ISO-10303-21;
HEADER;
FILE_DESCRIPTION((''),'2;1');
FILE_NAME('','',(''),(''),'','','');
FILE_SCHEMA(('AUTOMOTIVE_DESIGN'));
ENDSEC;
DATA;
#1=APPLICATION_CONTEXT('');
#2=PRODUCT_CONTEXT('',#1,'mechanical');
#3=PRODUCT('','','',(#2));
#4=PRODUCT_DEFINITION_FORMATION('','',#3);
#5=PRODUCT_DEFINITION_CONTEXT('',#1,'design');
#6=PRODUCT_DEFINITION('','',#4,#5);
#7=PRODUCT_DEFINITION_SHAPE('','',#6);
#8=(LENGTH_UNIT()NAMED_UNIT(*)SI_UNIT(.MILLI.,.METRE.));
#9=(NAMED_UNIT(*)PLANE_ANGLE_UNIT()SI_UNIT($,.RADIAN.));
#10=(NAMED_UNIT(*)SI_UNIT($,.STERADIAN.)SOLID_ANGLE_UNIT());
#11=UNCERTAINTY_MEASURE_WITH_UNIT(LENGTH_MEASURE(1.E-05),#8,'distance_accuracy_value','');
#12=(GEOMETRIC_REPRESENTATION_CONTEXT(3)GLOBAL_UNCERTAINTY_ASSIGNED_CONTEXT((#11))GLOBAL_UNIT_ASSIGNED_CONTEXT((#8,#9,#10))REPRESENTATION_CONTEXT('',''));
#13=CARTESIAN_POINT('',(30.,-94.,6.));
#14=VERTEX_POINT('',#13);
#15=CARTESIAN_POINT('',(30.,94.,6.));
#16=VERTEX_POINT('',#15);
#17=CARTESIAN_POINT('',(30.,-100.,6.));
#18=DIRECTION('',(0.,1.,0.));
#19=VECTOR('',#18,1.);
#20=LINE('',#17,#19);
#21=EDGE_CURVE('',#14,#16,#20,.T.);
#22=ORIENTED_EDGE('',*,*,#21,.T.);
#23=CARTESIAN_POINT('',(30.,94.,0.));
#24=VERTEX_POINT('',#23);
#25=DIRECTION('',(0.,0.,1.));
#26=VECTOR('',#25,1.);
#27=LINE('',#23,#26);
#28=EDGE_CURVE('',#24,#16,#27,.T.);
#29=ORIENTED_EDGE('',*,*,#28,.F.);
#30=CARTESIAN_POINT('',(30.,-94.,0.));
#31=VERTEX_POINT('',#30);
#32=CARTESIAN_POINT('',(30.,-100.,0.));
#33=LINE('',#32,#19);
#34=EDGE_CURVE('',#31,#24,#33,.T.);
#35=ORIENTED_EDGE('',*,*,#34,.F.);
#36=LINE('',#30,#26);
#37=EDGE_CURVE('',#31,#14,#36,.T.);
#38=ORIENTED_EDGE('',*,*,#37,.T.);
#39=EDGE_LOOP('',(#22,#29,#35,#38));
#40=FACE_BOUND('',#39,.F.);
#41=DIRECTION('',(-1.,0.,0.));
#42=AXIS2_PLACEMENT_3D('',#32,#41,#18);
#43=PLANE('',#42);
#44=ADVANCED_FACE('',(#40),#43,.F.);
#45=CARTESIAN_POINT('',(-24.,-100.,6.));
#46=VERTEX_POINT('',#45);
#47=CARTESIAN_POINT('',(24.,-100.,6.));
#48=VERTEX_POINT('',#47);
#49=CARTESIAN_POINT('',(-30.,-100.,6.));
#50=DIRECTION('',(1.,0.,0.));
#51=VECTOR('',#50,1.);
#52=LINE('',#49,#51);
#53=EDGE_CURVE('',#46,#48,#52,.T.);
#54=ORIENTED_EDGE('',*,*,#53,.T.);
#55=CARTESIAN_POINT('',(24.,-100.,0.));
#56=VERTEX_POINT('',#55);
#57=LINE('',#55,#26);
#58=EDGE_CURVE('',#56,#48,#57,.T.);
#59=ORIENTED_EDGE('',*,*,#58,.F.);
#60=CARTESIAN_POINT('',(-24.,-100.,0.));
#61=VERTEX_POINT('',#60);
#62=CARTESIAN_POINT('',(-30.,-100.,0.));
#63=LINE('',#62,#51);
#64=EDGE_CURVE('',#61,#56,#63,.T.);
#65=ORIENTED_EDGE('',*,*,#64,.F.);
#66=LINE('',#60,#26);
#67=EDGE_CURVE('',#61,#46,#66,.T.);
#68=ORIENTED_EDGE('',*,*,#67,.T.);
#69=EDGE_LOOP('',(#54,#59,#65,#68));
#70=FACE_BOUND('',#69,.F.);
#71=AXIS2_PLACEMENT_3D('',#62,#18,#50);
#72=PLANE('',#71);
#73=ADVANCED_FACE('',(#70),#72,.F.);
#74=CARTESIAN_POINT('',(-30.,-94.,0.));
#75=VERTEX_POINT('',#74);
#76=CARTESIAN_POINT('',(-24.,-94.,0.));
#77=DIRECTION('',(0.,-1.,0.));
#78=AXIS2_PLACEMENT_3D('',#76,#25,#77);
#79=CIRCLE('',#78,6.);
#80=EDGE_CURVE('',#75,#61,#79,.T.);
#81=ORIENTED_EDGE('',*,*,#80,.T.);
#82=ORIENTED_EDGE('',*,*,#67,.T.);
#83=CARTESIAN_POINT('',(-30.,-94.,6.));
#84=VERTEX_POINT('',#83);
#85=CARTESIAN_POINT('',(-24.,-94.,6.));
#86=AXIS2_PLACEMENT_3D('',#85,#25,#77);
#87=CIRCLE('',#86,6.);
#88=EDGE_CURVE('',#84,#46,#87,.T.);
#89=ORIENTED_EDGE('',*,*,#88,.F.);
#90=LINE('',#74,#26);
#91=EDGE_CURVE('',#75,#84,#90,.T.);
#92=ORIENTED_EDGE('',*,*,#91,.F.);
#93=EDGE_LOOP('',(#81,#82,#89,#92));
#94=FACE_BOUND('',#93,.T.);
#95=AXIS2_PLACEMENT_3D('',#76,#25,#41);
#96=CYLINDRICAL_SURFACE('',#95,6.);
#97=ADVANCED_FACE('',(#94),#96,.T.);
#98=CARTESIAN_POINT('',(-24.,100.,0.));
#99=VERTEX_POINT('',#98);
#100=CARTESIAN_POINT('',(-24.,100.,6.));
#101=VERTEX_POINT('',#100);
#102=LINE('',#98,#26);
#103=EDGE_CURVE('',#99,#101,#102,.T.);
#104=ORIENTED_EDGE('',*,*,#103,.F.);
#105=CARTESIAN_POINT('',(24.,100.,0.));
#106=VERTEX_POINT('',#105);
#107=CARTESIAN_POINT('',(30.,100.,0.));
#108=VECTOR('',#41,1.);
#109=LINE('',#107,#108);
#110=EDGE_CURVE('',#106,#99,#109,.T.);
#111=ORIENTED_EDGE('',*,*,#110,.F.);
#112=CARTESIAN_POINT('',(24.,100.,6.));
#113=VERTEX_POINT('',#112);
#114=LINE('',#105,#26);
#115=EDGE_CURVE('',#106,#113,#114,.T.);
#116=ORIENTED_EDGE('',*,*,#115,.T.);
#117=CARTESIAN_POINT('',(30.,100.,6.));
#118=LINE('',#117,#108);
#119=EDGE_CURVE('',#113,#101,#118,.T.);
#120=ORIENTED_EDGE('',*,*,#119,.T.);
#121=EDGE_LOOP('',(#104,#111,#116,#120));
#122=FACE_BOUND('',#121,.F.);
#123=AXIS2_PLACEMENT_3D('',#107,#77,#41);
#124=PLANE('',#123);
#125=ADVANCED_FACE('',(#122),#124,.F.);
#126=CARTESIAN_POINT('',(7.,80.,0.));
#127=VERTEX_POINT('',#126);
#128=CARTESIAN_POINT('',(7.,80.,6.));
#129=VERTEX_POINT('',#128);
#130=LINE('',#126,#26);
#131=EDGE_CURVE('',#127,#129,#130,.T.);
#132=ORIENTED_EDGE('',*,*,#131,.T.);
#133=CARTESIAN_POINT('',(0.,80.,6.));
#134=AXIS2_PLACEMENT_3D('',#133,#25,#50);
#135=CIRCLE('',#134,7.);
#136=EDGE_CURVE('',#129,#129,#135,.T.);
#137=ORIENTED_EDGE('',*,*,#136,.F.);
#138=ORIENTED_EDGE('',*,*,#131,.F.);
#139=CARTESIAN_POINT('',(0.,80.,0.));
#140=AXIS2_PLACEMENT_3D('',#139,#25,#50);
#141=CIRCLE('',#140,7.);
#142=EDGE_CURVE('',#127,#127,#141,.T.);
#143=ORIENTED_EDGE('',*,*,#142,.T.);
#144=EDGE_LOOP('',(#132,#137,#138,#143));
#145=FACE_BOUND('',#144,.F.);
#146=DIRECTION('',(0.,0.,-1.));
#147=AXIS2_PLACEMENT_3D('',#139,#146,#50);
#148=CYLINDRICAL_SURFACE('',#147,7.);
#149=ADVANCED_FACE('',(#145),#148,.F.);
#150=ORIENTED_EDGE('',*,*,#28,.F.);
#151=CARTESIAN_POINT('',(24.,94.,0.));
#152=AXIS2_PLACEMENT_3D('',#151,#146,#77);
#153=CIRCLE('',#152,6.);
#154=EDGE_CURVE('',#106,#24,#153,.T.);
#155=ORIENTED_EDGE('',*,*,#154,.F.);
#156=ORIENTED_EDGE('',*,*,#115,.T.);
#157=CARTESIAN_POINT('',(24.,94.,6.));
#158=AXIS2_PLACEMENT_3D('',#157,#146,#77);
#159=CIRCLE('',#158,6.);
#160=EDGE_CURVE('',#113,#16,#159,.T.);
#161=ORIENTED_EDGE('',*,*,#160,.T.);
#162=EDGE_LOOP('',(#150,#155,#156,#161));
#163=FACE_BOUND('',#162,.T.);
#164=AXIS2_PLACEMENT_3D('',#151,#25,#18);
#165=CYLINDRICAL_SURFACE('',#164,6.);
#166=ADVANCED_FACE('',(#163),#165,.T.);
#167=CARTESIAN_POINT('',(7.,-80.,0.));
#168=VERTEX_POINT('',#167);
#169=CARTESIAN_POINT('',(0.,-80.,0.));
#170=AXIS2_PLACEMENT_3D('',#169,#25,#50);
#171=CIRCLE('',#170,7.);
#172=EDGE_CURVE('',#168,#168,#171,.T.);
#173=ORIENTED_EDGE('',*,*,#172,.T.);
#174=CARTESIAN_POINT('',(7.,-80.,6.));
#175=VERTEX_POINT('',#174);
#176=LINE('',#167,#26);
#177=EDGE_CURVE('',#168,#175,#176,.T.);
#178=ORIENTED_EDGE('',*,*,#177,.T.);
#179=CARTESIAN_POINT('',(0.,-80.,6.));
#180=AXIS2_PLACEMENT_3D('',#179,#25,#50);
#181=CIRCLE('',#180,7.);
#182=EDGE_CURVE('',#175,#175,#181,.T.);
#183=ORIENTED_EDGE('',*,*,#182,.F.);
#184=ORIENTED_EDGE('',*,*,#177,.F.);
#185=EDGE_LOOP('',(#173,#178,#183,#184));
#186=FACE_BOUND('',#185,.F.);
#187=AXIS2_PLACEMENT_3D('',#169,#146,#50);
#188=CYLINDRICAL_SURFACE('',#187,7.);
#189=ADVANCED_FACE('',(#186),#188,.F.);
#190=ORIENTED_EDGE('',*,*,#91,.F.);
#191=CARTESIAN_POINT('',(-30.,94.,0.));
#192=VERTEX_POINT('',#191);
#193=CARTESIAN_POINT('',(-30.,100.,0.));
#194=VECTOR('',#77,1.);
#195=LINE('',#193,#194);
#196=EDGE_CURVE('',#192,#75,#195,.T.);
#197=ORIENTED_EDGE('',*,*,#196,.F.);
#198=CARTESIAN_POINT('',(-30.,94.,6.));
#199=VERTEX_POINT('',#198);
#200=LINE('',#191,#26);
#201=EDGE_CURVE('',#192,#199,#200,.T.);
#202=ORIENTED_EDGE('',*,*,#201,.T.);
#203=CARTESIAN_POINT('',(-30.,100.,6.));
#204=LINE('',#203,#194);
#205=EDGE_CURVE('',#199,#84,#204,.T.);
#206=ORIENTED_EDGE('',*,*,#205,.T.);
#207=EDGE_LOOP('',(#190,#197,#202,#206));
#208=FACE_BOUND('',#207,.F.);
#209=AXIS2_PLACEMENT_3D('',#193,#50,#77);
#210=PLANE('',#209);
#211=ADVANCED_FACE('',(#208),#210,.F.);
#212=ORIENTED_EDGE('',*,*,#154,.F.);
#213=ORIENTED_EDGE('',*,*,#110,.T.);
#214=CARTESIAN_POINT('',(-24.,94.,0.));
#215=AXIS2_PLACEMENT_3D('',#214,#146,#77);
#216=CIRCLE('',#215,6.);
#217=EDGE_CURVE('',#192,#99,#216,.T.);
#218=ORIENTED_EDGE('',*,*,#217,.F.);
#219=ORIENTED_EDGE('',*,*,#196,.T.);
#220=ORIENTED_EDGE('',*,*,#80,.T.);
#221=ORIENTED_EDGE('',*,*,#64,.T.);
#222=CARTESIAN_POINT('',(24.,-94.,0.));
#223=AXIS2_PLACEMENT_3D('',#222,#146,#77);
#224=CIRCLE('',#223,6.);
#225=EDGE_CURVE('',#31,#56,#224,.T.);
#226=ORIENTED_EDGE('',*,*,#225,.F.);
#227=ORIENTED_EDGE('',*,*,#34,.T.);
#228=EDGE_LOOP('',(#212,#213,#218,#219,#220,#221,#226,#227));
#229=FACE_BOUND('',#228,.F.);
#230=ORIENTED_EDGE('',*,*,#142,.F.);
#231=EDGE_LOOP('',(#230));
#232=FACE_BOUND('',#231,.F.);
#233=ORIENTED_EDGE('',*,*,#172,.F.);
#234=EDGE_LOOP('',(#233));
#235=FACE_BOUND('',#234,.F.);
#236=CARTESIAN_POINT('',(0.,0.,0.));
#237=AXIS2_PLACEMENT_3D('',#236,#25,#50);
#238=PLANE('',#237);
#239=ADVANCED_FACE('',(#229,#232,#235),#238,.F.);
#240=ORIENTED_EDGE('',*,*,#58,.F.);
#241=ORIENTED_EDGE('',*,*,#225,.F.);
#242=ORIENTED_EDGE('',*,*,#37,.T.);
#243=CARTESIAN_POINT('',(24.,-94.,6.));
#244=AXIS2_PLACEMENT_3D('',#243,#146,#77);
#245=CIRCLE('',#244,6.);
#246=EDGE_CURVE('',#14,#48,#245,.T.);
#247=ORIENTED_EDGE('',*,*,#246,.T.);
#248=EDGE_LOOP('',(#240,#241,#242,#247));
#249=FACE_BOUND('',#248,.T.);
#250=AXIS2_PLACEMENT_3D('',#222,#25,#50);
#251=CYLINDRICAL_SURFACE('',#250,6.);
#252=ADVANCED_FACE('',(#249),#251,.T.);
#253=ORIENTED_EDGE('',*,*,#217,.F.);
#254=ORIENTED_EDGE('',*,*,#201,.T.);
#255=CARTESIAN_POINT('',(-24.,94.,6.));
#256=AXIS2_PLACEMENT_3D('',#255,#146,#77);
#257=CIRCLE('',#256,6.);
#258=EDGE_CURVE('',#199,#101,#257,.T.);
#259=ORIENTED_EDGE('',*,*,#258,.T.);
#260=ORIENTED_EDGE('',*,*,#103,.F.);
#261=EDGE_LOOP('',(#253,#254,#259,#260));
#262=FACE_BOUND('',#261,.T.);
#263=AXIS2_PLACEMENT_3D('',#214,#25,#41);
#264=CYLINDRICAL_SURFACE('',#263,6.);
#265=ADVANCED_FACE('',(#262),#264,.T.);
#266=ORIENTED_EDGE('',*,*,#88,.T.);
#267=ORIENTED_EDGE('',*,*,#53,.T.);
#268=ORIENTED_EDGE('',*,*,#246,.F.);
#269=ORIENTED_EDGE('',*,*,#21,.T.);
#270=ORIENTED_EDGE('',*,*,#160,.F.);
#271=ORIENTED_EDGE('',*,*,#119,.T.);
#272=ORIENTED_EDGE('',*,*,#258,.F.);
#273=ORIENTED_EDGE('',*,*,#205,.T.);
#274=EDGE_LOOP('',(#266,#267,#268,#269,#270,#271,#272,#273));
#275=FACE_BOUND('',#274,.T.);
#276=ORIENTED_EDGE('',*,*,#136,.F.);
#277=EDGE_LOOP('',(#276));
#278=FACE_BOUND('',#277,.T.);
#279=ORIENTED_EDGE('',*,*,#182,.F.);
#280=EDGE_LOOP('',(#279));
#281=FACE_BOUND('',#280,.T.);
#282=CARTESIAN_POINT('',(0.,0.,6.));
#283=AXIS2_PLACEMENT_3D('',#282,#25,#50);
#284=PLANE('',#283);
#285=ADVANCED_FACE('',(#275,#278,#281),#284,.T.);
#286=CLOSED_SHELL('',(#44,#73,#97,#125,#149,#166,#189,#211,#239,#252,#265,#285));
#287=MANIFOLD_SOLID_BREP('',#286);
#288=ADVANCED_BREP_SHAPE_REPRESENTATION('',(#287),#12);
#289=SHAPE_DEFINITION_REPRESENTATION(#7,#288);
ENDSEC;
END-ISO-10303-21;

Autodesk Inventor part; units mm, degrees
ref_plane "YZ Plane" through (0, 0, 0) normal (1, 0, 0) x (0, 1, 0)
ref_plane "XZ Plane" through (0, 0, 0) normal (0, 1, 0) x (-1, 0, 0)
ref_plane "XY Plane" through (0, 0, 0) normal (0, 0, 1) x (1, 0, 0)
sketch "Sketch1" plane through (0, 0, 0) normal (0, 0, 1) x (1, 0, 0)
  line L0 (-30, -100) -> (30, -100)
  line L1 (30, -100) -> (30, 100)
  line L2 (30, 100) -> (-30, 100)
  line L3 (-30, 100) -> (-30, -100)
  line L4 (-30, -100) -> (30, 100) construction
  line L5 (30, -100) -> (-30, 100) construction
  circle A0 centre (0, 80) radius 7
  circle A1 centre (0, -80) radius 7
  line L6 (0, 100) -> (0, -100) construction
  line L7 (-30, 0) -> (30, 0) construction
  point P0 (0, 0)
  point P1 (0, 0)
  dimension "d154" = 60
  dimension "d155" = 200
  dimension "d157" = 20
  dimension "d159" = 14
extrude "Plate5" add sketch "Sketch1" along normal blind 6
fillet "Corner Round1" radius 6 4 edges at (-30, 100, 3) (30, 100, 3) (30, -100, 3) (-30, -100, 3)
